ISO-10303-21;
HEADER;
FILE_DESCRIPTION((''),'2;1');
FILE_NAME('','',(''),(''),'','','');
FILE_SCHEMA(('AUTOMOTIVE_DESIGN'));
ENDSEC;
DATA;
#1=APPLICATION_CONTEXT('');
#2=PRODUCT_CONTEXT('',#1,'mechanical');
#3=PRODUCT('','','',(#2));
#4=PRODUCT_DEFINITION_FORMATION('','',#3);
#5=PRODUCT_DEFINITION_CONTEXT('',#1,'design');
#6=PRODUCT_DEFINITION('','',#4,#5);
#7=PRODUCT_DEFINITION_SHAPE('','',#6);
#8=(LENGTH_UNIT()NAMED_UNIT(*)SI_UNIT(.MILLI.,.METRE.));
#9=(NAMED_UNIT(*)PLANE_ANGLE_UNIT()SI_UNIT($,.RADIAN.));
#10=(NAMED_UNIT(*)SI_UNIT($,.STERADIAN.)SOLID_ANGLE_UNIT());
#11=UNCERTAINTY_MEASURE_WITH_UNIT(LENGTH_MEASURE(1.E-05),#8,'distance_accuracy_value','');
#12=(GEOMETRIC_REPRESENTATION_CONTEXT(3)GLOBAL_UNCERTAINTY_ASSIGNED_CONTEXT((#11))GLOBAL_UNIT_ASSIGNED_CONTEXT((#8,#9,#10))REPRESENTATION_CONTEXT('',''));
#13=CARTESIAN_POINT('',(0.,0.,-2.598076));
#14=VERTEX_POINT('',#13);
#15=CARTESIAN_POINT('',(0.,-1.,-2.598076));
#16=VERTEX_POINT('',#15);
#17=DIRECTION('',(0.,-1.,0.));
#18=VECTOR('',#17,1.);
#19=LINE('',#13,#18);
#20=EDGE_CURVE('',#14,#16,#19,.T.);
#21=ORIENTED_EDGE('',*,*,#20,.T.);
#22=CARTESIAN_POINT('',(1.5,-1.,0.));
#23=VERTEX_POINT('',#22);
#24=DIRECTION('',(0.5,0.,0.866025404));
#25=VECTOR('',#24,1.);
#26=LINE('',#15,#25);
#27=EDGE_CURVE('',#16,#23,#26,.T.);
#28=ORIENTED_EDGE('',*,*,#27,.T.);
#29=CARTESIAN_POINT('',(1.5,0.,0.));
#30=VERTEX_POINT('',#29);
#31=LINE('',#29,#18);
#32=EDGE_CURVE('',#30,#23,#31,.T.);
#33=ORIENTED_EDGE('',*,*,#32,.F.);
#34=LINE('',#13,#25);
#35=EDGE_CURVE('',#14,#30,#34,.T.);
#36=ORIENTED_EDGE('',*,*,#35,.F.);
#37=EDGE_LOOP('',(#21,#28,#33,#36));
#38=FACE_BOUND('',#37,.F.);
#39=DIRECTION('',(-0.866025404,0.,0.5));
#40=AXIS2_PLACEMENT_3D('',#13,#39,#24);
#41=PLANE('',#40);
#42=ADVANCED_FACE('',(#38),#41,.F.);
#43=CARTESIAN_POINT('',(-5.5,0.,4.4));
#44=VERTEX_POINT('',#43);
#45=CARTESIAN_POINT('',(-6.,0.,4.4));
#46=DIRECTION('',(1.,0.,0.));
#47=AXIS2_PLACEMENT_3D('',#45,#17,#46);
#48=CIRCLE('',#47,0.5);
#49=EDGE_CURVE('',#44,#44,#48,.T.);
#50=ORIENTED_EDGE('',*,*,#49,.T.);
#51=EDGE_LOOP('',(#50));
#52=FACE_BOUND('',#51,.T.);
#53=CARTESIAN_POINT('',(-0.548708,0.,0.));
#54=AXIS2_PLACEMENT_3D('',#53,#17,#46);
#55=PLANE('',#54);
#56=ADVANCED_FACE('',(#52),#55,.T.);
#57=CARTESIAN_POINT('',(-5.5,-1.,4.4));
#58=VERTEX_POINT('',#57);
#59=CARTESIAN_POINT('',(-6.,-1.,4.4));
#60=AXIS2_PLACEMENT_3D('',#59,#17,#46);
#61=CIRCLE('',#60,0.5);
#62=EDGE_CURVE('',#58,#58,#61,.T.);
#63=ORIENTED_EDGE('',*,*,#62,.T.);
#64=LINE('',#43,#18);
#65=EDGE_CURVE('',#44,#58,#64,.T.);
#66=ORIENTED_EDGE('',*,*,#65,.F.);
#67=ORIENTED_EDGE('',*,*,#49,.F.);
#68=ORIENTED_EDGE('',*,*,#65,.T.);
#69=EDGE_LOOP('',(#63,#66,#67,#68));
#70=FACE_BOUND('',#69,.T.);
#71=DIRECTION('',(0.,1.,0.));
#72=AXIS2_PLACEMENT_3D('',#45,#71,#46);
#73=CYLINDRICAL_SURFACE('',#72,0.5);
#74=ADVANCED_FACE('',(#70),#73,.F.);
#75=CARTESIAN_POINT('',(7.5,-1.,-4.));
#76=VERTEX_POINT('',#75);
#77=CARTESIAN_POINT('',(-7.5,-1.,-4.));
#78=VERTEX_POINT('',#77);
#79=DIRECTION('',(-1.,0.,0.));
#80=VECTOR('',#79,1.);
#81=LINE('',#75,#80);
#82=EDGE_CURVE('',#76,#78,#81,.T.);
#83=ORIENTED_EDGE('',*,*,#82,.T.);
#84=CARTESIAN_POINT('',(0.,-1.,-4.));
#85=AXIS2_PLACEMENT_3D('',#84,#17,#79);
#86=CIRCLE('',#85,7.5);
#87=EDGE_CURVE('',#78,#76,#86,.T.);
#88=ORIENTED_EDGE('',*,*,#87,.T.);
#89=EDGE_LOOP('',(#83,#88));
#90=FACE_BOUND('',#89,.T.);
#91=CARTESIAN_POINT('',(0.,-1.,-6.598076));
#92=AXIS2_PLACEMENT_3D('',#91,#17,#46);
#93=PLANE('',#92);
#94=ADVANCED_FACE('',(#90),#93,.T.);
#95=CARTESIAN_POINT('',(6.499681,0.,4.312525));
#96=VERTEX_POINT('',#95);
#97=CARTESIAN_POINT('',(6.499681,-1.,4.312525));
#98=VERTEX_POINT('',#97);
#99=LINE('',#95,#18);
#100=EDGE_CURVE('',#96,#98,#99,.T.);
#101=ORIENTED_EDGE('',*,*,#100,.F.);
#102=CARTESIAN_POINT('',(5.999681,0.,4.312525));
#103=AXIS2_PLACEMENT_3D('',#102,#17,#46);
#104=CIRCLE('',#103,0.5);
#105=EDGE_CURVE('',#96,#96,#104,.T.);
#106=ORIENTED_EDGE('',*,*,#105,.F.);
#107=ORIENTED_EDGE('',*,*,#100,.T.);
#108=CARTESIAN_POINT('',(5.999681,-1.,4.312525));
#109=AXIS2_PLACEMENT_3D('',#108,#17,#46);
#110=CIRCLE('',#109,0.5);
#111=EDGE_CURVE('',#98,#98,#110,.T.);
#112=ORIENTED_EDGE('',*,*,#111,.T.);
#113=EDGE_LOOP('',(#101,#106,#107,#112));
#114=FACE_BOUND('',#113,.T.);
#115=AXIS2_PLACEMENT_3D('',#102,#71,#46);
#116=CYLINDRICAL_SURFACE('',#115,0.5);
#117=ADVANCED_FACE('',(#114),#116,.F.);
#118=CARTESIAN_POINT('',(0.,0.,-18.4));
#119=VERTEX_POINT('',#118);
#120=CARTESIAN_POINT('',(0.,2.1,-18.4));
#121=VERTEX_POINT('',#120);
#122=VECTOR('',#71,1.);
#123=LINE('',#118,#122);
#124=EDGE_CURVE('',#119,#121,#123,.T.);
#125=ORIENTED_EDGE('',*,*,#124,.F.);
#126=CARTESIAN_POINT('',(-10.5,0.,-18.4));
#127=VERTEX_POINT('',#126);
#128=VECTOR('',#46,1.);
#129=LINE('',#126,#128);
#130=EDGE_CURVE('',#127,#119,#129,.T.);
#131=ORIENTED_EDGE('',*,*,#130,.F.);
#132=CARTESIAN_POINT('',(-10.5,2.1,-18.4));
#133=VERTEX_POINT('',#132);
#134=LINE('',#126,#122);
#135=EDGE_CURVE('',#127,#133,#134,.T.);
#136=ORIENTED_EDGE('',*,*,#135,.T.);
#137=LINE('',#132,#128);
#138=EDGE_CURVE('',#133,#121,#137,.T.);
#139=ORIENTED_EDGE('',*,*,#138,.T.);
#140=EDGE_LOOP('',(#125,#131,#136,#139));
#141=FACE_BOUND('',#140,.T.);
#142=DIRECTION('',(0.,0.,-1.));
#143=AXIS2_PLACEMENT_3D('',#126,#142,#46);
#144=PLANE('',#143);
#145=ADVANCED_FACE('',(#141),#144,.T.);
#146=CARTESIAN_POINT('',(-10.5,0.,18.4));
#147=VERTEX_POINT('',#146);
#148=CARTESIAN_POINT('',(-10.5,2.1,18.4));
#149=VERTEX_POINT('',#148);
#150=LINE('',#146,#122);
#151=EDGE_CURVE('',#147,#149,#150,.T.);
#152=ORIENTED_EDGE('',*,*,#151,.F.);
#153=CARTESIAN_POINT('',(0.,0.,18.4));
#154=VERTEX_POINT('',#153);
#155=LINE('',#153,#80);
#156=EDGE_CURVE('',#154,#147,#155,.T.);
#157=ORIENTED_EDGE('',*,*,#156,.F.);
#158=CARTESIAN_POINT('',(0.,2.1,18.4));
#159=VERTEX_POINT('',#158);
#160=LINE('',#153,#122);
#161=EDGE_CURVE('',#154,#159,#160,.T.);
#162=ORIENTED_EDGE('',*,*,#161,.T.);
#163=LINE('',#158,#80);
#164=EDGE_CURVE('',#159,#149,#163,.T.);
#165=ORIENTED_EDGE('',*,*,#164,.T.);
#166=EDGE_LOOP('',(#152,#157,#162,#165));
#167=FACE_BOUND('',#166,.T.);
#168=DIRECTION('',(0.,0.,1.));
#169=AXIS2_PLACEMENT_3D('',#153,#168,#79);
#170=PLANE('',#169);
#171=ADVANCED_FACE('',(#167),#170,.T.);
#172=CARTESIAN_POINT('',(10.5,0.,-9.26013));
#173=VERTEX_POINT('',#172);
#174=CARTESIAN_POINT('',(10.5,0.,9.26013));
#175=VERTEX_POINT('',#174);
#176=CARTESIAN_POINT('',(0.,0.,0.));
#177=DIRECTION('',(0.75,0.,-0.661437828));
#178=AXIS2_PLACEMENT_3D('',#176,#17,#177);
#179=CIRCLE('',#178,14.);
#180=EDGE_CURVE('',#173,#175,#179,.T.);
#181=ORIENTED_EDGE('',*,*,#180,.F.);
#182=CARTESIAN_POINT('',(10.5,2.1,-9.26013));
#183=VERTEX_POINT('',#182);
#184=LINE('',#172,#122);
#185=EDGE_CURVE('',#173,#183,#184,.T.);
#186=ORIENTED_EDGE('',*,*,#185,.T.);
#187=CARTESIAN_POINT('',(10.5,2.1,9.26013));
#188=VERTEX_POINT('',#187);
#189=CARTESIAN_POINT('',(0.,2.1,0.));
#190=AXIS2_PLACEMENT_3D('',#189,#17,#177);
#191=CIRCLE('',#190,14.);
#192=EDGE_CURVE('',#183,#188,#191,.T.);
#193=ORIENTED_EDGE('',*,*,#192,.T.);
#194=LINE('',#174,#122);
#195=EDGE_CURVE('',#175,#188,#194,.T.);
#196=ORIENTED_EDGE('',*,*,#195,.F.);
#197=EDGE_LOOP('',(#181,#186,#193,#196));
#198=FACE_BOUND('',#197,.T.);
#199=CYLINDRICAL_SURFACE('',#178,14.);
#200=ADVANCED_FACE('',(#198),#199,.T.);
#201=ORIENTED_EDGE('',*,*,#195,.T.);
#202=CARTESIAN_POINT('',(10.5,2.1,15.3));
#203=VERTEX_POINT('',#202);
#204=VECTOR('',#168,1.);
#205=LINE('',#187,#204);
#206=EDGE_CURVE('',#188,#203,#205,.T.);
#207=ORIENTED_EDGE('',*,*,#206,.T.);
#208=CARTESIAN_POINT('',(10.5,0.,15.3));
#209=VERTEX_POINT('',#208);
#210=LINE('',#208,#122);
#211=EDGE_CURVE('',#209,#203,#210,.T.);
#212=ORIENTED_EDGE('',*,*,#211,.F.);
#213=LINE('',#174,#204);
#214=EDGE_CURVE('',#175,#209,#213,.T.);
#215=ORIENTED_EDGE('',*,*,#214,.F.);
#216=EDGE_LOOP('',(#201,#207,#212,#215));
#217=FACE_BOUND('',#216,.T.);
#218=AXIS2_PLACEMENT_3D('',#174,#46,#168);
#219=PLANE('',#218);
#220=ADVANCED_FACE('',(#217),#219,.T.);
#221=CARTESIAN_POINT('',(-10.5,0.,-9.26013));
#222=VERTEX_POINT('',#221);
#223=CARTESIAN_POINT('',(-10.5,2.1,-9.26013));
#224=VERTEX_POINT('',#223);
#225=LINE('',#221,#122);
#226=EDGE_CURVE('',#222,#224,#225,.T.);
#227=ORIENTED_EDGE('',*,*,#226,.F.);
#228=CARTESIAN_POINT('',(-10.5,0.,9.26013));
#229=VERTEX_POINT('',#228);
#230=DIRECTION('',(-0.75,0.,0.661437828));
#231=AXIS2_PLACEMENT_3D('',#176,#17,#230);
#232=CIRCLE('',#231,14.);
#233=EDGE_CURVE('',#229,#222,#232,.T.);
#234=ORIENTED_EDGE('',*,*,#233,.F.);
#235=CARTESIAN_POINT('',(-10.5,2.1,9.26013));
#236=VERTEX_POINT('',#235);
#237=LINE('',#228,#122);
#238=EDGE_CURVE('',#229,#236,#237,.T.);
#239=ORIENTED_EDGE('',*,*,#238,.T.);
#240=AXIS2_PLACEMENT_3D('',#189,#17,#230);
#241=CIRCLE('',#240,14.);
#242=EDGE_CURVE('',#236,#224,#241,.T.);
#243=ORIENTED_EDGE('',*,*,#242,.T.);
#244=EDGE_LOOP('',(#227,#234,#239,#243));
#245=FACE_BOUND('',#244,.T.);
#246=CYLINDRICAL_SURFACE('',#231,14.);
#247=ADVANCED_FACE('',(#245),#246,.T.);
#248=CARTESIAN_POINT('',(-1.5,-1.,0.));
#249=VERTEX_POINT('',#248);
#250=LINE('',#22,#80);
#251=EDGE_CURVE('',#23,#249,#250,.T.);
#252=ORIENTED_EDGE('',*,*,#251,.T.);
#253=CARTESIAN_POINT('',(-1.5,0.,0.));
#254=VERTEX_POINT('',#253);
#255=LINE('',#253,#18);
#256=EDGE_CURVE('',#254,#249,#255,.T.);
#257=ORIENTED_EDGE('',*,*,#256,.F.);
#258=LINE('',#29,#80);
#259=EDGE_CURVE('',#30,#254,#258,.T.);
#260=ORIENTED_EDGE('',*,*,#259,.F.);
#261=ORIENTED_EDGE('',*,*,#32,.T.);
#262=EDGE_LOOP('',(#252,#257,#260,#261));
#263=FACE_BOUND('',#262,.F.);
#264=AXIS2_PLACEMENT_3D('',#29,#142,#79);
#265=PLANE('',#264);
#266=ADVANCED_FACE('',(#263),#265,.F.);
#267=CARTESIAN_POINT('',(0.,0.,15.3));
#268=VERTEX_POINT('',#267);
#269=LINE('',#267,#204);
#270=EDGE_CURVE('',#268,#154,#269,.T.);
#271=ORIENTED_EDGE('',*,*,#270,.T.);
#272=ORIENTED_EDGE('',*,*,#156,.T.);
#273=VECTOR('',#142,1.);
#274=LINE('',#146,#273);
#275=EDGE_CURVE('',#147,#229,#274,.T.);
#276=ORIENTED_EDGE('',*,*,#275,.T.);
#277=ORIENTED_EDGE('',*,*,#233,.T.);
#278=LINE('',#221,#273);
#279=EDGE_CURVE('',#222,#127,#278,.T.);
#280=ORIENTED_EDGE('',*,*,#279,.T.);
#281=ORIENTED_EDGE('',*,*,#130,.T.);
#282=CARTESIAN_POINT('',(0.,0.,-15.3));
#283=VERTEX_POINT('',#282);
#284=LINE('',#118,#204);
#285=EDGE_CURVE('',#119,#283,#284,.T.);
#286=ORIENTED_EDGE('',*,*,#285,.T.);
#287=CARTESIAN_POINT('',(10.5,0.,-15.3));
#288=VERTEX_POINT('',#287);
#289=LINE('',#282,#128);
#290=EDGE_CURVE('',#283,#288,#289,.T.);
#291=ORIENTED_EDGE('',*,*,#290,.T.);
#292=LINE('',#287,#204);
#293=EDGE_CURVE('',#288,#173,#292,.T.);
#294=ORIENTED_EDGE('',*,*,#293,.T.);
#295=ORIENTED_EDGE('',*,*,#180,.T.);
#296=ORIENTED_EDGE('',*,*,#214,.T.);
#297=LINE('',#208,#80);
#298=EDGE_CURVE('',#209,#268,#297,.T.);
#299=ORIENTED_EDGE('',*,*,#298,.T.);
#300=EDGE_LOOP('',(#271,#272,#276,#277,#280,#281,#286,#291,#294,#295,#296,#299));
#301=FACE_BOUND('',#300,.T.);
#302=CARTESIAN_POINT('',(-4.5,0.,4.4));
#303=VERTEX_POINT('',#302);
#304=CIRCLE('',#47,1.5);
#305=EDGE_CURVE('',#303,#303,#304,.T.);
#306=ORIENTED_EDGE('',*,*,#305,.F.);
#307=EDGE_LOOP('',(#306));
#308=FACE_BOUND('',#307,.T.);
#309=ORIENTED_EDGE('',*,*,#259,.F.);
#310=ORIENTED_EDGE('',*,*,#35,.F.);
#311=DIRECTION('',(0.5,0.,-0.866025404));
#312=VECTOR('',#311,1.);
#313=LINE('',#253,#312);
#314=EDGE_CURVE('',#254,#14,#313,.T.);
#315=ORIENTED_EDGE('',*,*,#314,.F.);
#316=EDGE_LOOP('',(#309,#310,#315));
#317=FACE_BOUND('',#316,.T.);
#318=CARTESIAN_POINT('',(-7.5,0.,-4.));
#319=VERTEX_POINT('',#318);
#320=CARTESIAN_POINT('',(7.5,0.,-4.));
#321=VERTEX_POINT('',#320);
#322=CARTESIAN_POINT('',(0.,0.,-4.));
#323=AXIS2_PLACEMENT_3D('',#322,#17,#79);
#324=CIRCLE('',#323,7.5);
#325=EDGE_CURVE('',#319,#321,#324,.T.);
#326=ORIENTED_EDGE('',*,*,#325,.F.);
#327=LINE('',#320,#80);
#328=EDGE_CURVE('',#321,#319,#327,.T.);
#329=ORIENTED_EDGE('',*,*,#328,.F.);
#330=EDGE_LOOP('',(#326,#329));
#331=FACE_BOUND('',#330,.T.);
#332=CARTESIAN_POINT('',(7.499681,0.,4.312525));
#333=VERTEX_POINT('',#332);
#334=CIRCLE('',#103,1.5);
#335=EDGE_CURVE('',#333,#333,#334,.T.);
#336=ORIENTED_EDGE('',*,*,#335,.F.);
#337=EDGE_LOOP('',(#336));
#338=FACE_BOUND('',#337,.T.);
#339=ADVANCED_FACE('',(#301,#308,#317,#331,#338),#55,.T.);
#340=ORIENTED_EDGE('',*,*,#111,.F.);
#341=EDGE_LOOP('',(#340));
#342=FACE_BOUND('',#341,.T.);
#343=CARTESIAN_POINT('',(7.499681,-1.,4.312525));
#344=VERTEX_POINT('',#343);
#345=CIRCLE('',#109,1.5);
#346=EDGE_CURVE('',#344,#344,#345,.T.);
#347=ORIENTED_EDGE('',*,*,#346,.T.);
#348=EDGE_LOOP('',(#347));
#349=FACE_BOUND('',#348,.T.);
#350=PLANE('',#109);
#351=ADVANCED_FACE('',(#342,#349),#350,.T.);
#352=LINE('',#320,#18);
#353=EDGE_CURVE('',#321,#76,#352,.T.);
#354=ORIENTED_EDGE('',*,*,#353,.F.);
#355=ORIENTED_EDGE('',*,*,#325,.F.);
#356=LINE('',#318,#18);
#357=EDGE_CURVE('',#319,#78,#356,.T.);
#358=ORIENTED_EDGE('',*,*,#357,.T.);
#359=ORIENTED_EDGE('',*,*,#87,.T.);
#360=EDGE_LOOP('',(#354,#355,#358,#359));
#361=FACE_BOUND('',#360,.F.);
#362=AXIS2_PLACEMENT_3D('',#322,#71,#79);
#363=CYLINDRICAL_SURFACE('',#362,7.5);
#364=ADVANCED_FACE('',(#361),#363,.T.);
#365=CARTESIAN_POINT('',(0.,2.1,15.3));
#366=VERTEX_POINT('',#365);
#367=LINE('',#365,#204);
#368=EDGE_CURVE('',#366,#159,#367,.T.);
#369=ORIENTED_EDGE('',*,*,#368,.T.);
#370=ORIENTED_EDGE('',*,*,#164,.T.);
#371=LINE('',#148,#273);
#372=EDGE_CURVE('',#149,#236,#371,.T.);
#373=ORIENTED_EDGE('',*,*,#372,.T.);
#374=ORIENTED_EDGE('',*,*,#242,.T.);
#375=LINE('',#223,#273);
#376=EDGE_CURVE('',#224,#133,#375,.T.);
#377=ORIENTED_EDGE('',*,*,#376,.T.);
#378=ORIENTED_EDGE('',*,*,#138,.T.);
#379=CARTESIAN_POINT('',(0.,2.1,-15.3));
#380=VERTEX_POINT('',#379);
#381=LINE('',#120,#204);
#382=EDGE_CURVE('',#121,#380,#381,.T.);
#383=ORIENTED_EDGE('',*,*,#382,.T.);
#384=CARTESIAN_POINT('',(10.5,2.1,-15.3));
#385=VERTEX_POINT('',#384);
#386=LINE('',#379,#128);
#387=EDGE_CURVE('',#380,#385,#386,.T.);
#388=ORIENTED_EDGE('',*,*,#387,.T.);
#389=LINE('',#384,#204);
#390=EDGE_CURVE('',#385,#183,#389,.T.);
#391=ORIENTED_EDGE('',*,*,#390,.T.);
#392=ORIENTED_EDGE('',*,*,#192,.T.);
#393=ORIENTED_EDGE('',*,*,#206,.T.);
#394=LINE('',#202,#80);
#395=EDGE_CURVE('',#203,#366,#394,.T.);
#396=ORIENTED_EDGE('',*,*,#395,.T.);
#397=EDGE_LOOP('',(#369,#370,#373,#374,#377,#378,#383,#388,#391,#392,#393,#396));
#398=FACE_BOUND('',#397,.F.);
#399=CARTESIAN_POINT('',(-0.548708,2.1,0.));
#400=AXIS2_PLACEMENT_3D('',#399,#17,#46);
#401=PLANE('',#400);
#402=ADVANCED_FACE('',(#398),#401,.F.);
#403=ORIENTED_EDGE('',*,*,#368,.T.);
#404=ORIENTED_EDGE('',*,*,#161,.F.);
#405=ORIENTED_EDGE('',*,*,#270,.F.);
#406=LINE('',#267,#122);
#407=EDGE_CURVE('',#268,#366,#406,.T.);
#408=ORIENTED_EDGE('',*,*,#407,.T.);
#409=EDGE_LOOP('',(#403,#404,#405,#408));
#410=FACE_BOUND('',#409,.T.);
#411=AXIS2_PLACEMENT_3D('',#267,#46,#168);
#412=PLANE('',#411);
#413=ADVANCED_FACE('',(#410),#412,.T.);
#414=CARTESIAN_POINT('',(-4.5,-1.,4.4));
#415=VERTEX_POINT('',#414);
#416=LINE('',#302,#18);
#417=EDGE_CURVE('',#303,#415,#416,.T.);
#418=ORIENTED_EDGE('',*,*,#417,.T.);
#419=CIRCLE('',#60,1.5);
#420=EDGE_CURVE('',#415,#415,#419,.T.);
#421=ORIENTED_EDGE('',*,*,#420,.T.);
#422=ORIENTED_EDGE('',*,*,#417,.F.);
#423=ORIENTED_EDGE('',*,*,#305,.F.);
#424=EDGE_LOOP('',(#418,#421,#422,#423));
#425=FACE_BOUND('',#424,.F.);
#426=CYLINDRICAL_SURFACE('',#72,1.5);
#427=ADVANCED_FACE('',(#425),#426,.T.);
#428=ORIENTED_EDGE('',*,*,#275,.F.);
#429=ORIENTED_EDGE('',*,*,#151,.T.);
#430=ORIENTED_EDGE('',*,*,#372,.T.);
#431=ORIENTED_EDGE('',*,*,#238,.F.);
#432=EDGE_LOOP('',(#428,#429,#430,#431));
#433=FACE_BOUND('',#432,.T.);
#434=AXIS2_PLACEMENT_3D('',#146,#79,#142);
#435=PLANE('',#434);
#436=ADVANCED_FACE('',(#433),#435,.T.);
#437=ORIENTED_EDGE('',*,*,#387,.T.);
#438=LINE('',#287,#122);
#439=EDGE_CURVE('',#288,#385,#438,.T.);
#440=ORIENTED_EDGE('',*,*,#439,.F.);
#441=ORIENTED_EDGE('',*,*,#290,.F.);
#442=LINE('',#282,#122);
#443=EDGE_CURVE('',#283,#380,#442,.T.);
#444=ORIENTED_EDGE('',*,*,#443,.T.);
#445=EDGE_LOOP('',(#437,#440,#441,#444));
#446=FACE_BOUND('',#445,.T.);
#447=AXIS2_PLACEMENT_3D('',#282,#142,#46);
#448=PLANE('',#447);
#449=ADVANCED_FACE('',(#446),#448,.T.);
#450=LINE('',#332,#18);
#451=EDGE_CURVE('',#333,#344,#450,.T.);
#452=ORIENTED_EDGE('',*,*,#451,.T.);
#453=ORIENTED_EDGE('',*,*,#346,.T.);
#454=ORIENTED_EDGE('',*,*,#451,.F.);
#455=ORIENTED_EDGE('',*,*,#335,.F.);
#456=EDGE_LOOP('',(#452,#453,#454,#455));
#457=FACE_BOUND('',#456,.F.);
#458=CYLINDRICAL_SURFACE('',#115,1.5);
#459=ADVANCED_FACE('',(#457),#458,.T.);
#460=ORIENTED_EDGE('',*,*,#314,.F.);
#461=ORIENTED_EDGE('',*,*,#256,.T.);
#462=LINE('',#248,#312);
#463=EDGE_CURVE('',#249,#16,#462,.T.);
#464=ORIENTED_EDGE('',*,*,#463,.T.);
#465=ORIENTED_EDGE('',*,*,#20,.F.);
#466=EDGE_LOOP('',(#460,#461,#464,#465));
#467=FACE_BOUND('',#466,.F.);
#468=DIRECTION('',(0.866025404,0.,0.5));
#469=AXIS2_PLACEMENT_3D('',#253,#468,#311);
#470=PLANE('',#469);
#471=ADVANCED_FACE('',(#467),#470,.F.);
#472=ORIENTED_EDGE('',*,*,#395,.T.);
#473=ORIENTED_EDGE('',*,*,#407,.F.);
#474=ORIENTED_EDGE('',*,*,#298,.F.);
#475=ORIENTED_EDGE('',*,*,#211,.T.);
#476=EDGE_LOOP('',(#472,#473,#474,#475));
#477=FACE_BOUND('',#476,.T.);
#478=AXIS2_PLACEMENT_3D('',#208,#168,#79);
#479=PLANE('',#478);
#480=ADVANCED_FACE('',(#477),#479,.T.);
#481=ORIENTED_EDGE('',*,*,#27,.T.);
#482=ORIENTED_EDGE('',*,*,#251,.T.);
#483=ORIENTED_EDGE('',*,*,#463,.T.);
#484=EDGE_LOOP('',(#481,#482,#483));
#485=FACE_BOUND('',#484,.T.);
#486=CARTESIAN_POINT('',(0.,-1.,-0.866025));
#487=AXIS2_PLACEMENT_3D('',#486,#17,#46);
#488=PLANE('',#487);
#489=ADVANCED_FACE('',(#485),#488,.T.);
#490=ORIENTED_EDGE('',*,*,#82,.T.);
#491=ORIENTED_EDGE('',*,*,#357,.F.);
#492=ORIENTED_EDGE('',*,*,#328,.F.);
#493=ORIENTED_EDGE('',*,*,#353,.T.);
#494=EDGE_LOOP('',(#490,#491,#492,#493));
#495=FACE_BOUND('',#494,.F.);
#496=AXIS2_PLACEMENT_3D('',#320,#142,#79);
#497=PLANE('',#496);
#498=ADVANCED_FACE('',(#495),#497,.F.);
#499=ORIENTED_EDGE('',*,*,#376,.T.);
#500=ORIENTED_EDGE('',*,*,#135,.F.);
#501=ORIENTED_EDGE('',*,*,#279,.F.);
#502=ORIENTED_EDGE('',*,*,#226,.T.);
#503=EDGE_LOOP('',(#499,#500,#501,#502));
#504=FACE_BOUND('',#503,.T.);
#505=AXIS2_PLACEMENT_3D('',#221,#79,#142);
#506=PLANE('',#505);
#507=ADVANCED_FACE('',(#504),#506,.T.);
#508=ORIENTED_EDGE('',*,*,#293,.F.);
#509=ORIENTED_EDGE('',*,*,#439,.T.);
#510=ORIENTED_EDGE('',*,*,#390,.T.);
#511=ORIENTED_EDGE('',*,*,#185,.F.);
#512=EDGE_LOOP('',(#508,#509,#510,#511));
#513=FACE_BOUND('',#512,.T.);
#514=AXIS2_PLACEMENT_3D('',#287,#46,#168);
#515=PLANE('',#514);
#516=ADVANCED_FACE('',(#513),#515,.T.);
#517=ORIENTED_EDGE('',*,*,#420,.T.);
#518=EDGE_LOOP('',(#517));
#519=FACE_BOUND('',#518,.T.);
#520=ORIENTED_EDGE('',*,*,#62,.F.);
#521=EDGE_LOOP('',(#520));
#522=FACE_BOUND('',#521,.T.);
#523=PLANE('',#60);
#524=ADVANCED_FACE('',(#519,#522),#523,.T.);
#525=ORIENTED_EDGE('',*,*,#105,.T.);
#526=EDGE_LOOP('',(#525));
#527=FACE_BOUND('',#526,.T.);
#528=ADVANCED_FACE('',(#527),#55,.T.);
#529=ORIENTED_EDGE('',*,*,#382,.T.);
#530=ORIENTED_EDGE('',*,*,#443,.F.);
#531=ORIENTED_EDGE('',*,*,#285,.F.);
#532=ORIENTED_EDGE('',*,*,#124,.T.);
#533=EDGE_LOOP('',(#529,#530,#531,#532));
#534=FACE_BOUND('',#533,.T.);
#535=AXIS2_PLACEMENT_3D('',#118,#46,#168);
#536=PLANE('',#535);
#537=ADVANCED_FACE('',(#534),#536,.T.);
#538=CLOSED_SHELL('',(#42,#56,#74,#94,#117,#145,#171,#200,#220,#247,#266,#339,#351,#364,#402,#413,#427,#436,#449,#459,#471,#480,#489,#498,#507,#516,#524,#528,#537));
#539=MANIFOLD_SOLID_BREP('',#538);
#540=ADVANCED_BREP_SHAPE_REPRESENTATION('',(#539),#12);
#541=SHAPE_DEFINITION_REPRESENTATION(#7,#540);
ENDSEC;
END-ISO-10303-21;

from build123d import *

# Parameters (mm, degrees)
F1_DEPTH = 2.1
F4_DEPTH = 1
F7_DEPTH = 1
F2_R     = 1.5
F2_R_2   = 0.5
F8_DEPTH = 1


# Not quite as in the source:
# - a feature names something its author has since deleted; it is built from what else it names
# - the program builds the solid bodies; features that only make, move or delete a surface that nothing else refers to are left out


with BuildPart() as f1:
    # F0 (on Front) → F1 (new body)
    with BuildSketch(Plane.XZ):
        with BuildLine():
            ThreePointArc((-10.5, 9.2601295887), (-14, 0), (-10.5, -9.2601295887))
            Line((-10.5, -9.2601295887), (-10.5, -18.4))
            Line((-10.5, -18.4), (0, -18.4))
            Line((0, -18.4), (0, -15.3))
            Line((0, -15.3), (10.5, -15.3))
            Line((10.5, -15.3), (10.5, -9.2601295887))
            ThreePointArc((10.5, -9.2601295887), (14, 0), (10.5, 9.2601295887))
            Line((10.5, 9.2601295887), (10.5, 15.3))
            Line((10.5, 15.3), (0, 15.3))
            Line((0, 15.3), (0, 18.4))
            Line((0, 18.4), (-10.5, 18.4))
            Line((-10.5, 18.4), (-10.5, 9.2601295887))
        make_face()
    extrude(amount=-F1_DEPTH)

    # F3 (on face) → F4 (join)
    with BuildSketch(Plane.XZ):
        Polygon((1.5, 0), (-1.5, 0), (0, -2.5980762114), align=None)
    extrude(amount=F4_DEPTH)

    # F5 (on face) → F7 (join)
    with BuildSketch(Plane.XZ):
        with BuildLine():
            Line((0, -4), (-7.5, -4))
            ThreePointArc((-7.5, -4), (0, -11.5), (7.5, -4))
            Line((7.5, -4), (0, -4))
        make_face()
    extrude(amount=F7_DEPTH)

    # F2 (on Front) → F8 (join)
    with BuildSketch(Plane.XZ):
        with Locations((-6, 4.4)):
            Circle(F2_R)
        with Locations((-6, 4.4)):
            Circle(F2_R_2, mode=Mode.SUBTRACT)
        with Locations((5.9996811691, 4.3125251973)):
            Circle(F2_R)
        with Locations((5.9996811691, 4.3125251973)):
            Circle(F2_R_2, mode=Mode.SUBTRACT)
    extrude(amount=F8_DEPTH)


solid = f1.part
